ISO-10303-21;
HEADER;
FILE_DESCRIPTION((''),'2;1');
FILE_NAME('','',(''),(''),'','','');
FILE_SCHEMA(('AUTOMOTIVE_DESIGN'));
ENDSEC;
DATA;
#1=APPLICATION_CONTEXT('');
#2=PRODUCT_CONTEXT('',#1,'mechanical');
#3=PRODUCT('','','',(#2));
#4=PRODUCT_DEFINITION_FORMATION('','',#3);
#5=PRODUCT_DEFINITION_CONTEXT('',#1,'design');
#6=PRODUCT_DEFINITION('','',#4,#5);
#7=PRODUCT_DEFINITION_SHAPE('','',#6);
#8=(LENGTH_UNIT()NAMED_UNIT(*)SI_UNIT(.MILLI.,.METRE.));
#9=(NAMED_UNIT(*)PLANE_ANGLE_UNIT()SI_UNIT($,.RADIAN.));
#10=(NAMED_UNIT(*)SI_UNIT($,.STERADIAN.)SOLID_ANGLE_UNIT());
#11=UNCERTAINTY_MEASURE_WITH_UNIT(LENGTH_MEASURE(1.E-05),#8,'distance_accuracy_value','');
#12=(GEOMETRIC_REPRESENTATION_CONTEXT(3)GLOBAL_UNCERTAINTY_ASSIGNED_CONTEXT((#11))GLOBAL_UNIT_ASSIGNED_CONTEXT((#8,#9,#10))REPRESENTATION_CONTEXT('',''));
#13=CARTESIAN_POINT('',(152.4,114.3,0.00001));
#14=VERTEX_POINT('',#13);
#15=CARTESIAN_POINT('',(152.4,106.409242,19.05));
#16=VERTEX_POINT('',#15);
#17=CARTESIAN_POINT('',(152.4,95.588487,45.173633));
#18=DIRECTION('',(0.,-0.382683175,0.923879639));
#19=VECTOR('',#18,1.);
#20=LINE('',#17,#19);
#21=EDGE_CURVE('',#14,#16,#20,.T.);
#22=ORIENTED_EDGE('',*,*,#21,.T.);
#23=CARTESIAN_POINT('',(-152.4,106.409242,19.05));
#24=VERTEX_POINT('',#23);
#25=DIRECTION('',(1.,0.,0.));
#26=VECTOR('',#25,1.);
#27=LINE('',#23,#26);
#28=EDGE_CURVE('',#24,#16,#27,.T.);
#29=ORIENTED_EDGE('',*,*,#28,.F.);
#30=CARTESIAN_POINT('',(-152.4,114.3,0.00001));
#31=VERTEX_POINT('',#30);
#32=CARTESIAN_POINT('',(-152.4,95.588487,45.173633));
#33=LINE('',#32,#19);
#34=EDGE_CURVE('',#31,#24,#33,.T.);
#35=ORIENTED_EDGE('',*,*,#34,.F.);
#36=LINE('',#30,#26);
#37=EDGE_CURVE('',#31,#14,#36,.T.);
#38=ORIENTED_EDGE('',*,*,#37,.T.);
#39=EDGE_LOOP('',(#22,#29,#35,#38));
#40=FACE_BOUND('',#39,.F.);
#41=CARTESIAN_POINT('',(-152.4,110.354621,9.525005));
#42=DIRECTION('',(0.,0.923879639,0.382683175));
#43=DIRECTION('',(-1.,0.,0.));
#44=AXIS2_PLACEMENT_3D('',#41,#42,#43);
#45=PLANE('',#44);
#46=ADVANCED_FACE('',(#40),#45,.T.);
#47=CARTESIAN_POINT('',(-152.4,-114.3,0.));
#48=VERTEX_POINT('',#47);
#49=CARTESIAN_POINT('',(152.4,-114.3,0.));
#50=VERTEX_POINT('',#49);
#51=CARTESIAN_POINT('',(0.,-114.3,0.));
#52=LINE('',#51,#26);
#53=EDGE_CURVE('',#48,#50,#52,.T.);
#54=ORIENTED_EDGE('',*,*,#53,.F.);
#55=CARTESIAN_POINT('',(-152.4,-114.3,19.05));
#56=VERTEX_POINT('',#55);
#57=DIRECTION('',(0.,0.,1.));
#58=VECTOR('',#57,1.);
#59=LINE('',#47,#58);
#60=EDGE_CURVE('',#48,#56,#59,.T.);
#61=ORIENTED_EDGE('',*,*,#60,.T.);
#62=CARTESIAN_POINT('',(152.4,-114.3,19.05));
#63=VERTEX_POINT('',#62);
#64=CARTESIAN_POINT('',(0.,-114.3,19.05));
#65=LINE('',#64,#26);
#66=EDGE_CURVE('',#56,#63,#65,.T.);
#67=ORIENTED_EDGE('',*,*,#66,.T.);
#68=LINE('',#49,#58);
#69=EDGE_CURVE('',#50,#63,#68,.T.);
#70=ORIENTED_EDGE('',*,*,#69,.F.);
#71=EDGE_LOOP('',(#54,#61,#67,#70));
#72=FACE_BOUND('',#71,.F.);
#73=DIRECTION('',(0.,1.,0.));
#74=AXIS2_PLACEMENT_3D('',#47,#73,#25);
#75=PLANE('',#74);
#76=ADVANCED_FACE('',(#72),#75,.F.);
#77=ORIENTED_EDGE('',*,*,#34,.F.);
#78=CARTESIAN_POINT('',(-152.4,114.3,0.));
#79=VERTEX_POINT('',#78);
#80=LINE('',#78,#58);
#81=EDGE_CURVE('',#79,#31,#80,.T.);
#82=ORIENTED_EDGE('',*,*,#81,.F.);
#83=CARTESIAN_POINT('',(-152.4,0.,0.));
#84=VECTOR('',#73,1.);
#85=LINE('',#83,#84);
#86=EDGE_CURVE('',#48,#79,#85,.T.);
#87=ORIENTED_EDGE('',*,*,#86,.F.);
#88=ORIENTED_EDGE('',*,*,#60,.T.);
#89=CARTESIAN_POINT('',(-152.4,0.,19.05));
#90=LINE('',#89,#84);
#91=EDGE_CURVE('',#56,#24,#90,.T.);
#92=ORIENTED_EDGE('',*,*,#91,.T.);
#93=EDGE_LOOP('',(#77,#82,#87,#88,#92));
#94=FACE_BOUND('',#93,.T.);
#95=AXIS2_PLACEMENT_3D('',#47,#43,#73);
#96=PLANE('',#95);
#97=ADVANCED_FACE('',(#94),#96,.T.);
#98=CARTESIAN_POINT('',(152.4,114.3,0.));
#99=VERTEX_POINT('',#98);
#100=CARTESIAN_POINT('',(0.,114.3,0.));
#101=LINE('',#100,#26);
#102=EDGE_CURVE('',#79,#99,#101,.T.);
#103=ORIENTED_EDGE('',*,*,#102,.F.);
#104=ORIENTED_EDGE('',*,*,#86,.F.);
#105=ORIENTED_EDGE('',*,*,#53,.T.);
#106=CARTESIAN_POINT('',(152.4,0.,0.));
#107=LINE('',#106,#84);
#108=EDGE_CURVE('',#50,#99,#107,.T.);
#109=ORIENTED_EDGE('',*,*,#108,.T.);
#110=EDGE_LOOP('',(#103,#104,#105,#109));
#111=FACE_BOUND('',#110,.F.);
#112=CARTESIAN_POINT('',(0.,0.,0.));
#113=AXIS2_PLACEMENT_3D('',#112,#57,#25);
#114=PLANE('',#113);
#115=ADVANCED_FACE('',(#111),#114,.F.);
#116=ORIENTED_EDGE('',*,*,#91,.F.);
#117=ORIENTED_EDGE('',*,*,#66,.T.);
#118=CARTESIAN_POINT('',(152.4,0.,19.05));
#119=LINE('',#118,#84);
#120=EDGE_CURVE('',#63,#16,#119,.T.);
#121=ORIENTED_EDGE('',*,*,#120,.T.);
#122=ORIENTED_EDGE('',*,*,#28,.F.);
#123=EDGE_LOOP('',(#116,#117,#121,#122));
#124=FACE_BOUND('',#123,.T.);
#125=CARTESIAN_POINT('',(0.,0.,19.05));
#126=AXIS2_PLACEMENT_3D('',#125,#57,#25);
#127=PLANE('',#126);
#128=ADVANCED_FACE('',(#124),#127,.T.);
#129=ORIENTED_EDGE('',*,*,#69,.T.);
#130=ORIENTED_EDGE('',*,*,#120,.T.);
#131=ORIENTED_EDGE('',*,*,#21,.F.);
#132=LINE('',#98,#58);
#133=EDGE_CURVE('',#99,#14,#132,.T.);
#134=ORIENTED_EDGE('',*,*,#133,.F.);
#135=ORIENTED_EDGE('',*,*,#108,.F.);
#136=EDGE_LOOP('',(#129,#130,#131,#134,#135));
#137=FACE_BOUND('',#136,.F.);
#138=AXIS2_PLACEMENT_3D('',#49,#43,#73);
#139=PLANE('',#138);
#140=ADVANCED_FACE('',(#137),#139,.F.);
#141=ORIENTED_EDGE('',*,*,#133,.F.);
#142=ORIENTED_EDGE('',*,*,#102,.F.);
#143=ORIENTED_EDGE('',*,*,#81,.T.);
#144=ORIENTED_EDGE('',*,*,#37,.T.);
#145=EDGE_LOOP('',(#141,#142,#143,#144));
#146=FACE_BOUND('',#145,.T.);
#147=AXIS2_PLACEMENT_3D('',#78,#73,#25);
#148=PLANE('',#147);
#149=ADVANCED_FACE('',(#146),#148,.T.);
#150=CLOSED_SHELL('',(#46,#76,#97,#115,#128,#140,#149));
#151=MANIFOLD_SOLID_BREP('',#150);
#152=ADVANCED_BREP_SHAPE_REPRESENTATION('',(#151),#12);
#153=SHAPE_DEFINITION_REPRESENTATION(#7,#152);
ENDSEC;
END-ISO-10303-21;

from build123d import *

# Parameters (mm, degrees)
F0_W     = 304.8
F0_H     = 228.6
F1_DEPTH = 19.05
F2_SIZE2 = 7.890758
F2_SIZE  = 19.04999


# Not quite as in the source:
# - a fillet or chamfer is up to 0.001 mm smaller than in the source, because OpenCascade refuses the exact size


with BuildPart() as f1:
    # F0 (on Top) → F1 (new body)
    with BuildSketch(Plane.XY):
        Rectangle(F0_W, F0_H)
    extrude(amount=F1_DEPTH)

    # F2 (size 19.05 and 7.8907683632 in the source; OpenCascade refuses exactly that, so slightly less here)
    f2_edges = [f1.edges().sort_by_distance(p)[0] for p in [
        (0, 114.3, 19.05),
    ]]
    f2_side = f1.faces().sort_by_distance((0, 114.3, 9.525))[0]
    chamfer(f2_edges, length=F2_SIZE, length2=F2_SIZE2, reference=f2_side)


solid = f1.part
